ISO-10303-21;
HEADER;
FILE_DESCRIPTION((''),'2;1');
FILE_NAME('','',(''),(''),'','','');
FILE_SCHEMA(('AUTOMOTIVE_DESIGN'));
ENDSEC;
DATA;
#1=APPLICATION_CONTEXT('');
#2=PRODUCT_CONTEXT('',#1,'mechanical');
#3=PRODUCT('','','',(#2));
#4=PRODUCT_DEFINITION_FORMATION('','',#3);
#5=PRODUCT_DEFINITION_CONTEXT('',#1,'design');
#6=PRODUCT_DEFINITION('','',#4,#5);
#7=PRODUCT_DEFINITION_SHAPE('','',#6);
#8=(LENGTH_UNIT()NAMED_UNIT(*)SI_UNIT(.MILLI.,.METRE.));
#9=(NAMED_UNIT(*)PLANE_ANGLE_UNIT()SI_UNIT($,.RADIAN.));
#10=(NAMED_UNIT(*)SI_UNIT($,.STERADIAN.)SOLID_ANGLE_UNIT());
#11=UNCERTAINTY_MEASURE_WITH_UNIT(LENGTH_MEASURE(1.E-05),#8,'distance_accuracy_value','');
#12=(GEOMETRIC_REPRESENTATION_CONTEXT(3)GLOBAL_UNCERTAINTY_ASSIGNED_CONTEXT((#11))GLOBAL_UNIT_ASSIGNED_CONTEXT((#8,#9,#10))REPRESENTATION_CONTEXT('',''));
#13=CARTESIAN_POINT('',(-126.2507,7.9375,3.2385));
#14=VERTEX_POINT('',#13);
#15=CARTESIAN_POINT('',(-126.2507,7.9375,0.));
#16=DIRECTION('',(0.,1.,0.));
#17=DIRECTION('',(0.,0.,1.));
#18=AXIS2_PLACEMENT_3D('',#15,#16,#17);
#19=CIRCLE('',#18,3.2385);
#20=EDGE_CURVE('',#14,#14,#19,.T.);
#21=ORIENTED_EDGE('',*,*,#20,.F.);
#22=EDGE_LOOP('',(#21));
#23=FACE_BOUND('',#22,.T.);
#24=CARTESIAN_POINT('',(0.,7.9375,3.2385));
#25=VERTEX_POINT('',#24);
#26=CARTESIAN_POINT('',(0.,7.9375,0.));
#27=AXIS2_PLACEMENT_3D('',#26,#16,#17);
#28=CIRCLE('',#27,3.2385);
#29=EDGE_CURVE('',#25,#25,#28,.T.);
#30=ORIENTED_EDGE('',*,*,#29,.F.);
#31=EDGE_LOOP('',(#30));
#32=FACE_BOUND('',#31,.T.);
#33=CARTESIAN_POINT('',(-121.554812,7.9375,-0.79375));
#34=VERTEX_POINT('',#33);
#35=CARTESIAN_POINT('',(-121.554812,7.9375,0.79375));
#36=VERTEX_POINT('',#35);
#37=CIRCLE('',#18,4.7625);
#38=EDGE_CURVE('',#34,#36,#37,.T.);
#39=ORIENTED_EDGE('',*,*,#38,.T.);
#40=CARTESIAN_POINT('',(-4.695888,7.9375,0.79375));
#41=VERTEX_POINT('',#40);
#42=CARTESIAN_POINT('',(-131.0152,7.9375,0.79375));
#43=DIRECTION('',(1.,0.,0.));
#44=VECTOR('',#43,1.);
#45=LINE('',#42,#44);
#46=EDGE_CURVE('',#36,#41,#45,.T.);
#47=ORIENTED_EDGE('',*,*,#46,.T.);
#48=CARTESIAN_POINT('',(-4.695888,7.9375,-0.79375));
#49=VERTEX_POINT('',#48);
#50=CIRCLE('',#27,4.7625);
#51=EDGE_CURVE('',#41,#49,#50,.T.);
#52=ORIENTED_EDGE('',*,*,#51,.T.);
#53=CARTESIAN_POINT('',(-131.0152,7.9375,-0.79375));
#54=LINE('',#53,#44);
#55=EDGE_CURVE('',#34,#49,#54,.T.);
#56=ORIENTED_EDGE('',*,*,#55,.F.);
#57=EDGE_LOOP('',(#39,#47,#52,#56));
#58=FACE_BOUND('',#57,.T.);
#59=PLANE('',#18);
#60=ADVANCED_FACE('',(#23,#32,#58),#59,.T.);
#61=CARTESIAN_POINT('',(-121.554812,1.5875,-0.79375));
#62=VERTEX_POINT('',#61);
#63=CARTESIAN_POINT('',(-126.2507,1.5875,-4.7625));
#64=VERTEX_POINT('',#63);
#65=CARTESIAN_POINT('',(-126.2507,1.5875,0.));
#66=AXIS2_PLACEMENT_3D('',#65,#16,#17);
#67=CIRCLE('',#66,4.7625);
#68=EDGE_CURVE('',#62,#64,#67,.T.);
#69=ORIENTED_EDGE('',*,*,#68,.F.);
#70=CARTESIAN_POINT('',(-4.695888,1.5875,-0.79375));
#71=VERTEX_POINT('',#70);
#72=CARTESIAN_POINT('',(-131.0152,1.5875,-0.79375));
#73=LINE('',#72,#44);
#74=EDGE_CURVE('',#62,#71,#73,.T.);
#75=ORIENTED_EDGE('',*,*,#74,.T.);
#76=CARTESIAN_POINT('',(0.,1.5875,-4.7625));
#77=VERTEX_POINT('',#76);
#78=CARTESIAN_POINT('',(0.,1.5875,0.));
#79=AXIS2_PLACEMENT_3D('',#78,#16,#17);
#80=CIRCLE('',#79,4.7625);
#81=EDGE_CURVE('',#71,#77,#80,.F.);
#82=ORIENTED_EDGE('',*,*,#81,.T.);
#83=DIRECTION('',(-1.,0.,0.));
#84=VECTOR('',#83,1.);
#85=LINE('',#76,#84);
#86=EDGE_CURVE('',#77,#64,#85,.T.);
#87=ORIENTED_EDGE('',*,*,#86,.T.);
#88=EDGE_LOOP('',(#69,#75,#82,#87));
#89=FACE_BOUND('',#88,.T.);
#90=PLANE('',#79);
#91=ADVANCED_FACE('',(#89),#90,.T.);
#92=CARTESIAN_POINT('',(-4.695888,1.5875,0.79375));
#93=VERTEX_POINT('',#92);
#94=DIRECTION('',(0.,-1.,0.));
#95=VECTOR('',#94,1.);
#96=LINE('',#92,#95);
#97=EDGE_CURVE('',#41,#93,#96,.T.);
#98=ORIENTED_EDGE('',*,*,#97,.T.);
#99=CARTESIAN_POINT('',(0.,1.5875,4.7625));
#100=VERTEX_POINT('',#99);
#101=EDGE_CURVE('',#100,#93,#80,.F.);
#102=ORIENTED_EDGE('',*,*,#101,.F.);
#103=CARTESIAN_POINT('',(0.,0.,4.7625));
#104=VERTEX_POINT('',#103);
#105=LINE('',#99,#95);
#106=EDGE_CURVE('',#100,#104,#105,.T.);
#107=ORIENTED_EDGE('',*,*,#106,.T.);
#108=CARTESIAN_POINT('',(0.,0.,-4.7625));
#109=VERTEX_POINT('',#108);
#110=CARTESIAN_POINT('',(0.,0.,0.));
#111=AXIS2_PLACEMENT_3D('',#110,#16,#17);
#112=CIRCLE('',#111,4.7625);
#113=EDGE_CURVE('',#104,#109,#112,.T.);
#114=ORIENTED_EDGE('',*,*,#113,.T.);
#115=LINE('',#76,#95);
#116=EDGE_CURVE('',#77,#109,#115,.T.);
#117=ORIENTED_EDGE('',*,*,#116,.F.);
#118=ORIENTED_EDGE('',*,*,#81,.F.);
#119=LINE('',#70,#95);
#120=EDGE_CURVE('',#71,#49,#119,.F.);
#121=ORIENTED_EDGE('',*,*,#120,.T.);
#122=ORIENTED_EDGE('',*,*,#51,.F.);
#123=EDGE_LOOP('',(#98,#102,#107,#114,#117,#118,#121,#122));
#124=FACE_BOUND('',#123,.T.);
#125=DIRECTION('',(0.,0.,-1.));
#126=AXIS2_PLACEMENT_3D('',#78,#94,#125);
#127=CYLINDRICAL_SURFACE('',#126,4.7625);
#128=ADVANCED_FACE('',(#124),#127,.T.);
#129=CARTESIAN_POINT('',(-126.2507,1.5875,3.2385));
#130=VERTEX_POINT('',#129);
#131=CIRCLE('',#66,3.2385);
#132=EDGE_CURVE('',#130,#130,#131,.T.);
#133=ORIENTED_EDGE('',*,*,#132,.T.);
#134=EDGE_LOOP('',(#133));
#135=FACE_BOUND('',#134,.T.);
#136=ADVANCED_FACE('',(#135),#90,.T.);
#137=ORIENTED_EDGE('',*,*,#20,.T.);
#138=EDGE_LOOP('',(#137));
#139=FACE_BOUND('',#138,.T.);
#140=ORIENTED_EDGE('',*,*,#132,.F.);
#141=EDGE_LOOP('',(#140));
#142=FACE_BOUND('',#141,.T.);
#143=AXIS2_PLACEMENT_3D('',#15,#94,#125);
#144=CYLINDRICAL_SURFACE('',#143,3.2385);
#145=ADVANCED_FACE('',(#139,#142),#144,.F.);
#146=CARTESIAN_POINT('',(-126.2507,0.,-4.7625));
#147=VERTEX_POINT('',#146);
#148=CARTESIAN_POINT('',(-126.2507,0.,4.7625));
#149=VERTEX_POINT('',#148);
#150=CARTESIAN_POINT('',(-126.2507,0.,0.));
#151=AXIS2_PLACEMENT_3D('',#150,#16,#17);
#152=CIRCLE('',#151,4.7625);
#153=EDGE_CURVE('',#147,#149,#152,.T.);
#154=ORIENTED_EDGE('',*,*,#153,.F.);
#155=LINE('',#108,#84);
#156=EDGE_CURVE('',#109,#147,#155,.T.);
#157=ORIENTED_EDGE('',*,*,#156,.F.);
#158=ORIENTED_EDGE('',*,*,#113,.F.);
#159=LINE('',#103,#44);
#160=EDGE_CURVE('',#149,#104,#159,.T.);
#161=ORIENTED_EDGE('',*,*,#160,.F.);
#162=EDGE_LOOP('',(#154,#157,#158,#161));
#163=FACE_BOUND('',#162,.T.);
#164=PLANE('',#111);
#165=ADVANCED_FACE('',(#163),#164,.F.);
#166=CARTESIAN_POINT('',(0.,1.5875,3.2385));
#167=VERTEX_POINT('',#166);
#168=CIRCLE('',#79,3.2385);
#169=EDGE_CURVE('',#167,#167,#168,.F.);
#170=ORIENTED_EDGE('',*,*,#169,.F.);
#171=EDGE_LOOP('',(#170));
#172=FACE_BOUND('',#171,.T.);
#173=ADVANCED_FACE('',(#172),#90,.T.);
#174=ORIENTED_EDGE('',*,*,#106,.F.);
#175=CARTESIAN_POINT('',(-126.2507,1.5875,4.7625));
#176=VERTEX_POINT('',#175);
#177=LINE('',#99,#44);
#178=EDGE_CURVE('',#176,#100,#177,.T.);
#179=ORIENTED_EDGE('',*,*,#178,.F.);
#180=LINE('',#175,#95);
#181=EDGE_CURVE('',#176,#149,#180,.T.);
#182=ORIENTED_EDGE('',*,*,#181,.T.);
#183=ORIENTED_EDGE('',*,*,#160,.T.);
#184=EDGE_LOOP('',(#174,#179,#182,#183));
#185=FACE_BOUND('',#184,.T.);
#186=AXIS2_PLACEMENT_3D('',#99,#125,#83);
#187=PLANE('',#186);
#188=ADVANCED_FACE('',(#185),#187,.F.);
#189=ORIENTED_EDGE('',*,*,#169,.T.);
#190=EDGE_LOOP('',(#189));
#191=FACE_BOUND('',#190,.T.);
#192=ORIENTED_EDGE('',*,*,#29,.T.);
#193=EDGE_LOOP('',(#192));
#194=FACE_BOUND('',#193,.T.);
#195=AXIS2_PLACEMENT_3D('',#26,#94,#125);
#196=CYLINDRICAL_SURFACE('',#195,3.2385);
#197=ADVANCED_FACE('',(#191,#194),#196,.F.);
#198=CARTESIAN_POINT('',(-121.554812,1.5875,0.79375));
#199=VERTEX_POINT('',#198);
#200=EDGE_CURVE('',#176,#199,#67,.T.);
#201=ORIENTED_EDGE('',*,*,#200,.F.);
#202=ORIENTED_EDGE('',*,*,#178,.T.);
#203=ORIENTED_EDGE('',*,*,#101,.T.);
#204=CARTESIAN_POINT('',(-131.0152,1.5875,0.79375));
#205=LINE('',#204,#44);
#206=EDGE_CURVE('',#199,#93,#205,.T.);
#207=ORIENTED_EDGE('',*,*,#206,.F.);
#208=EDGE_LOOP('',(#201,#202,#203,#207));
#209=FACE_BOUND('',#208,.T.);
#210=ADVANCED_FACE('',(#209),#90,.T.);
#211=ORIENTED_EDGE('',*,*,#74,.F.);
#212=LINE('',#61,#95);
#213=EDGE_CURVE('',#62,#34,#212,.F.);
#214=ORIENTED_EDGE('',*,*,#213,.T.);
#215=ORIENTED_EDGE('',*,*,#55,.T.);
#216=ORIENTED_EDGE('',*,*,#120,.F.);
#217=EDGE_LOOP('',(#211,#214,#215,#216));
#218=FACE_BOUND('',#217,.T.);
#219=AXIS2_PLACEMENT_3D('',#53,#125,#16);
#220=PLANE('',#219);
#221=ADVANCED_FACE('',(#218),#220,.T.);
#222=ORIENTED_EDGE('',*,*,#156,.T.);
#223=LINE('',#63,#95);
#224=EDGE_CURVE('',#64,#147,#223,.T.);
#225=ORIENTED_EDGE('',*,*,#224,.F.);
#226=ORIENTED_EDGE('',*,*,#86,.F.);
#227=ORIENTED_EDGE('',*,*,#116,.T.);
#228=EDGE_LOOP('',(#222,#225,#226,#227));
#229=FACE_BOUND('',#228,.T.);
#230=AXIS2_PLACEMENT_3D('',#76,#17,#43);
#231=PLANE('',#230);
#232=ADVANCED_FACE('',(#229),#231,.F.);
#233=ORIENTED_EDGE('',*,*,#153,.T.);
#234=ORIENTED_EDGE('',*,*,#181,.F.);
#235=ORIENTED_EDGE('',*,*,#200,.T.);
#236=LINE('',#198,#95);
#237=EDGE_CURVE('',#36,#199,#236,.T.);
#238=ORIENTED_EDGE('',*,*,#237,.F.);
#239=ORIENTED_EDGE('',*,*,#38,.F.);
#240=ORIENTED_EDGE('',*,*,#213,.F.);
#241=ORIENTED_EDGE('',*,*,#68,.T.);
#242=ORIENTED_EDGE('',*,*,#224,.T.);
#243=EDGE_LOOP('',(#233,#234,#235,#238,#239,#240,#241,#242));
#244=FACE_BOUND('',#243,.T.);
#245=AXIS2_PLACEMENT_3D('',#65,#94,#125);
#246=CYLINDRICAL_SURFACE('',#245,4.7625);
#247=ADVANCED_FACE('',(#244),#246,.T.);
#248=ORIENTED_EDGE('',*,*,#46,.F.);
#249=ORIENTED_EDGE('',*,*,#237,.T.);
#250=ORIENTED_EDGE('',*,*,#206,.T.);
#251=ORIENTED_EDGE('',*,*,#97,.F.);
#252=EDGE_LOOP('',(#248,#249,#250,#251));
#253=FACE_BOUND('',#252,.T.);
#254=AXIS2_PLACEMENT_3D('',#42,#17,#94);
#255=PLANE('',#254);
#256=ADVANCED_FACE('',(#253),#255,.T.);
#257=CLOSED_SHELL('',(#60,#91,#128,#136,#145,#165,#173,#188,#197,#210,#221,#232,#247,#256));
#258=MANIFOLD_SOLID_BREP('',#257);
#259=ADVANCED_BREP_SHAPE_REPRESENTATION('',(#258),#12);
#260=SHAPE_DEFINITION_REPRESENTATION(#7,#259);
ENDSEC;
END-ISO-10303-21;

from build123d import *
from build123d.topology import SkipClean

# Parameters (mm, degrees)
BOSS_EXTRUDE1_DEPTH                  = 1.5875
SKETCH2_R                            = 4.7625
SKETCH2_R_2                          = 3.2385
BOSS_EXTRUDE2_DEPTH                  = 6.35
BOSS_EXTRUDE3_REACH                  = 158.74
BOSS_EXTRUDE3_END_RADIUS             = 4.7625
BOSS_EXTRUDE3_START                  = -25.4
SKETCH3_W                            = 1.5875
SKETCH3_H                            = 6.35
BOSS_EXTRUDE3_DIRECTION_2_REACH      = 158.74
BOSS_EXTRUDE3_DIRECTION_2_END_RADIUS = 4.7625


with BuildPart() as part:
    # Sketch1 → Boss-Extrude1 (new body)
    with BuildSketch(Plane(origin=(0, 0, 0), x_dir=(1, 0, 0), z_dir=(0, 1, 0))):
        with BuildLine():
            Line((0, -4.7625), (-126.2507, -4.7625))
            ThreePointArc((-126.2507, -4.7625), (-131.0132, 0), (-126.2507, 4.7625))
            Line((-126.2507, 4.7625), (0, 4.7625))
            ThreePointArc((0, 4.7625), (4.7625, 0), (0, -4.7625))
        make_face()
    extrude(amount=BOSS_EXTRUDE1_DEPTH)

    # Sketch2 → Boss-Extrude2 (add)
    # profile 1 of 2: a face of its own
    with SkipClean():  # the faces are left unmerged after this step: merging them gives an invalid solid
        with BuildSketch(Plane(origin=(0, 1.5875, 0), x_dir=(1, 0, 0), z_dir=(0, 1, 0))):
            with Locations(Location((-126.2507, 0, 0), (0, 0, 270))):
                Circle(SKETCH2_R)
            with Locations(Location((-126.2507, 0, 0), (0, 0, 270))):
                Circle(SKETCH2_R_2, mode=Mode.SUBTRACT)
        # profile 2 of 2: a face of its own
        with BuildSketch(Plane(origin=(0, 1.5875, 0), x_dir=(1, 0, 0), z_dir=(0, 1, 0))):
            with Locations(Location((0, 0, 0), (0, 0, 270))):
                Circle(SKETCH2_R)
            with Locations(Location((0, 0, 0), (0, 0, 270))):
                Circle(SKETCH2_R_2, mode=Mode.SUBTRACT)
        extrude(amount=BOSS_EXTRUDE2_DEPTH)

    # Boss-Extrude3: up to this cylinder (the profile starts outside it)
    with SkipClean():  # the faces are left unmerged after this step: merging them gives an invalid solid
        boss_extrude3_end = Plane(origin=(-126.2507, 4.7625, 0), z_dir=(0, -1, 0)) * Cylinder(BOSS_EXTRUDE3_END_RADIUS, 328.005, mode=Mode.PRIVATE)
        # Sketch3 → Boss-Extrude3 (add, up to the surface)
        with BuildSketch(Plane(origin=(0, 0, 0), x_dir=(0, 0, -1), z_dir=(1, 0, 0)).offset(BOSS_EXTRUDE3_START), mode=Mode.PRIVATE) as boss_extrude3_sk1:
            with Locations((0, 4.7625)):
                Rectangle(SKETCH3_W, SKETCH3_H)
        boss_extrude3_tool1 = extrude(boss_extrude3_sk1.sketch, amount=-BOSS_EXTRUDE3_REACH, mode=Mode.PRIVATE) - boss_extrude3_end
        add(boss_extrude3_tool1.solids().sort_by_distance((-25.4, 4.7625, 0))[0])
    add(part.part.scale(1), mode=Mode.REPLACE)  # the faces are merged on a copy

    # Boss-Extrude3 direction 2: up to this cylinder (the profile starts outside it)
    boss_extrude3_direction_2_end = Plane(origin=(0, 4.7625, 0), z_dir=(0, -1, 0)) * Cylinder(BOSS_EXTRUDE3_DIRECTION_2_END_RADIUS, 328.005, mode=Mode.PRIVATE)
    # Sketch3 → Boss-Extrude3 direction 2 (add, up to the surface)
    with BuildSketch(Plane(origin=(0, 0, 0), x_dir=(0, 0, -1), z_dir=(1, 0, 0)).offset(BOSS_EXTRUDE3_START), mode=Mode.PRIVATE) as boss_extrude3_direction_2_sk1:
        with Locations((0, 4.7625)):
            Rectangle(SKETCH3_W, SKETCH3_H)
    boss_extrude3_direction_2_tool1 = extrude(boss_extrude3_direction_2_sk1.sketch, amount=BOSS_EXTRUDE3_DIRECTION_2_REACH, mode=Mode.PRIVATE) - boss_extrude3_direction_2_end
    add(boss_extrude3_direction_2_tool1.solids().sort_by_distance((-25.4, 4.7625, 0))[0])


solid = part.part
